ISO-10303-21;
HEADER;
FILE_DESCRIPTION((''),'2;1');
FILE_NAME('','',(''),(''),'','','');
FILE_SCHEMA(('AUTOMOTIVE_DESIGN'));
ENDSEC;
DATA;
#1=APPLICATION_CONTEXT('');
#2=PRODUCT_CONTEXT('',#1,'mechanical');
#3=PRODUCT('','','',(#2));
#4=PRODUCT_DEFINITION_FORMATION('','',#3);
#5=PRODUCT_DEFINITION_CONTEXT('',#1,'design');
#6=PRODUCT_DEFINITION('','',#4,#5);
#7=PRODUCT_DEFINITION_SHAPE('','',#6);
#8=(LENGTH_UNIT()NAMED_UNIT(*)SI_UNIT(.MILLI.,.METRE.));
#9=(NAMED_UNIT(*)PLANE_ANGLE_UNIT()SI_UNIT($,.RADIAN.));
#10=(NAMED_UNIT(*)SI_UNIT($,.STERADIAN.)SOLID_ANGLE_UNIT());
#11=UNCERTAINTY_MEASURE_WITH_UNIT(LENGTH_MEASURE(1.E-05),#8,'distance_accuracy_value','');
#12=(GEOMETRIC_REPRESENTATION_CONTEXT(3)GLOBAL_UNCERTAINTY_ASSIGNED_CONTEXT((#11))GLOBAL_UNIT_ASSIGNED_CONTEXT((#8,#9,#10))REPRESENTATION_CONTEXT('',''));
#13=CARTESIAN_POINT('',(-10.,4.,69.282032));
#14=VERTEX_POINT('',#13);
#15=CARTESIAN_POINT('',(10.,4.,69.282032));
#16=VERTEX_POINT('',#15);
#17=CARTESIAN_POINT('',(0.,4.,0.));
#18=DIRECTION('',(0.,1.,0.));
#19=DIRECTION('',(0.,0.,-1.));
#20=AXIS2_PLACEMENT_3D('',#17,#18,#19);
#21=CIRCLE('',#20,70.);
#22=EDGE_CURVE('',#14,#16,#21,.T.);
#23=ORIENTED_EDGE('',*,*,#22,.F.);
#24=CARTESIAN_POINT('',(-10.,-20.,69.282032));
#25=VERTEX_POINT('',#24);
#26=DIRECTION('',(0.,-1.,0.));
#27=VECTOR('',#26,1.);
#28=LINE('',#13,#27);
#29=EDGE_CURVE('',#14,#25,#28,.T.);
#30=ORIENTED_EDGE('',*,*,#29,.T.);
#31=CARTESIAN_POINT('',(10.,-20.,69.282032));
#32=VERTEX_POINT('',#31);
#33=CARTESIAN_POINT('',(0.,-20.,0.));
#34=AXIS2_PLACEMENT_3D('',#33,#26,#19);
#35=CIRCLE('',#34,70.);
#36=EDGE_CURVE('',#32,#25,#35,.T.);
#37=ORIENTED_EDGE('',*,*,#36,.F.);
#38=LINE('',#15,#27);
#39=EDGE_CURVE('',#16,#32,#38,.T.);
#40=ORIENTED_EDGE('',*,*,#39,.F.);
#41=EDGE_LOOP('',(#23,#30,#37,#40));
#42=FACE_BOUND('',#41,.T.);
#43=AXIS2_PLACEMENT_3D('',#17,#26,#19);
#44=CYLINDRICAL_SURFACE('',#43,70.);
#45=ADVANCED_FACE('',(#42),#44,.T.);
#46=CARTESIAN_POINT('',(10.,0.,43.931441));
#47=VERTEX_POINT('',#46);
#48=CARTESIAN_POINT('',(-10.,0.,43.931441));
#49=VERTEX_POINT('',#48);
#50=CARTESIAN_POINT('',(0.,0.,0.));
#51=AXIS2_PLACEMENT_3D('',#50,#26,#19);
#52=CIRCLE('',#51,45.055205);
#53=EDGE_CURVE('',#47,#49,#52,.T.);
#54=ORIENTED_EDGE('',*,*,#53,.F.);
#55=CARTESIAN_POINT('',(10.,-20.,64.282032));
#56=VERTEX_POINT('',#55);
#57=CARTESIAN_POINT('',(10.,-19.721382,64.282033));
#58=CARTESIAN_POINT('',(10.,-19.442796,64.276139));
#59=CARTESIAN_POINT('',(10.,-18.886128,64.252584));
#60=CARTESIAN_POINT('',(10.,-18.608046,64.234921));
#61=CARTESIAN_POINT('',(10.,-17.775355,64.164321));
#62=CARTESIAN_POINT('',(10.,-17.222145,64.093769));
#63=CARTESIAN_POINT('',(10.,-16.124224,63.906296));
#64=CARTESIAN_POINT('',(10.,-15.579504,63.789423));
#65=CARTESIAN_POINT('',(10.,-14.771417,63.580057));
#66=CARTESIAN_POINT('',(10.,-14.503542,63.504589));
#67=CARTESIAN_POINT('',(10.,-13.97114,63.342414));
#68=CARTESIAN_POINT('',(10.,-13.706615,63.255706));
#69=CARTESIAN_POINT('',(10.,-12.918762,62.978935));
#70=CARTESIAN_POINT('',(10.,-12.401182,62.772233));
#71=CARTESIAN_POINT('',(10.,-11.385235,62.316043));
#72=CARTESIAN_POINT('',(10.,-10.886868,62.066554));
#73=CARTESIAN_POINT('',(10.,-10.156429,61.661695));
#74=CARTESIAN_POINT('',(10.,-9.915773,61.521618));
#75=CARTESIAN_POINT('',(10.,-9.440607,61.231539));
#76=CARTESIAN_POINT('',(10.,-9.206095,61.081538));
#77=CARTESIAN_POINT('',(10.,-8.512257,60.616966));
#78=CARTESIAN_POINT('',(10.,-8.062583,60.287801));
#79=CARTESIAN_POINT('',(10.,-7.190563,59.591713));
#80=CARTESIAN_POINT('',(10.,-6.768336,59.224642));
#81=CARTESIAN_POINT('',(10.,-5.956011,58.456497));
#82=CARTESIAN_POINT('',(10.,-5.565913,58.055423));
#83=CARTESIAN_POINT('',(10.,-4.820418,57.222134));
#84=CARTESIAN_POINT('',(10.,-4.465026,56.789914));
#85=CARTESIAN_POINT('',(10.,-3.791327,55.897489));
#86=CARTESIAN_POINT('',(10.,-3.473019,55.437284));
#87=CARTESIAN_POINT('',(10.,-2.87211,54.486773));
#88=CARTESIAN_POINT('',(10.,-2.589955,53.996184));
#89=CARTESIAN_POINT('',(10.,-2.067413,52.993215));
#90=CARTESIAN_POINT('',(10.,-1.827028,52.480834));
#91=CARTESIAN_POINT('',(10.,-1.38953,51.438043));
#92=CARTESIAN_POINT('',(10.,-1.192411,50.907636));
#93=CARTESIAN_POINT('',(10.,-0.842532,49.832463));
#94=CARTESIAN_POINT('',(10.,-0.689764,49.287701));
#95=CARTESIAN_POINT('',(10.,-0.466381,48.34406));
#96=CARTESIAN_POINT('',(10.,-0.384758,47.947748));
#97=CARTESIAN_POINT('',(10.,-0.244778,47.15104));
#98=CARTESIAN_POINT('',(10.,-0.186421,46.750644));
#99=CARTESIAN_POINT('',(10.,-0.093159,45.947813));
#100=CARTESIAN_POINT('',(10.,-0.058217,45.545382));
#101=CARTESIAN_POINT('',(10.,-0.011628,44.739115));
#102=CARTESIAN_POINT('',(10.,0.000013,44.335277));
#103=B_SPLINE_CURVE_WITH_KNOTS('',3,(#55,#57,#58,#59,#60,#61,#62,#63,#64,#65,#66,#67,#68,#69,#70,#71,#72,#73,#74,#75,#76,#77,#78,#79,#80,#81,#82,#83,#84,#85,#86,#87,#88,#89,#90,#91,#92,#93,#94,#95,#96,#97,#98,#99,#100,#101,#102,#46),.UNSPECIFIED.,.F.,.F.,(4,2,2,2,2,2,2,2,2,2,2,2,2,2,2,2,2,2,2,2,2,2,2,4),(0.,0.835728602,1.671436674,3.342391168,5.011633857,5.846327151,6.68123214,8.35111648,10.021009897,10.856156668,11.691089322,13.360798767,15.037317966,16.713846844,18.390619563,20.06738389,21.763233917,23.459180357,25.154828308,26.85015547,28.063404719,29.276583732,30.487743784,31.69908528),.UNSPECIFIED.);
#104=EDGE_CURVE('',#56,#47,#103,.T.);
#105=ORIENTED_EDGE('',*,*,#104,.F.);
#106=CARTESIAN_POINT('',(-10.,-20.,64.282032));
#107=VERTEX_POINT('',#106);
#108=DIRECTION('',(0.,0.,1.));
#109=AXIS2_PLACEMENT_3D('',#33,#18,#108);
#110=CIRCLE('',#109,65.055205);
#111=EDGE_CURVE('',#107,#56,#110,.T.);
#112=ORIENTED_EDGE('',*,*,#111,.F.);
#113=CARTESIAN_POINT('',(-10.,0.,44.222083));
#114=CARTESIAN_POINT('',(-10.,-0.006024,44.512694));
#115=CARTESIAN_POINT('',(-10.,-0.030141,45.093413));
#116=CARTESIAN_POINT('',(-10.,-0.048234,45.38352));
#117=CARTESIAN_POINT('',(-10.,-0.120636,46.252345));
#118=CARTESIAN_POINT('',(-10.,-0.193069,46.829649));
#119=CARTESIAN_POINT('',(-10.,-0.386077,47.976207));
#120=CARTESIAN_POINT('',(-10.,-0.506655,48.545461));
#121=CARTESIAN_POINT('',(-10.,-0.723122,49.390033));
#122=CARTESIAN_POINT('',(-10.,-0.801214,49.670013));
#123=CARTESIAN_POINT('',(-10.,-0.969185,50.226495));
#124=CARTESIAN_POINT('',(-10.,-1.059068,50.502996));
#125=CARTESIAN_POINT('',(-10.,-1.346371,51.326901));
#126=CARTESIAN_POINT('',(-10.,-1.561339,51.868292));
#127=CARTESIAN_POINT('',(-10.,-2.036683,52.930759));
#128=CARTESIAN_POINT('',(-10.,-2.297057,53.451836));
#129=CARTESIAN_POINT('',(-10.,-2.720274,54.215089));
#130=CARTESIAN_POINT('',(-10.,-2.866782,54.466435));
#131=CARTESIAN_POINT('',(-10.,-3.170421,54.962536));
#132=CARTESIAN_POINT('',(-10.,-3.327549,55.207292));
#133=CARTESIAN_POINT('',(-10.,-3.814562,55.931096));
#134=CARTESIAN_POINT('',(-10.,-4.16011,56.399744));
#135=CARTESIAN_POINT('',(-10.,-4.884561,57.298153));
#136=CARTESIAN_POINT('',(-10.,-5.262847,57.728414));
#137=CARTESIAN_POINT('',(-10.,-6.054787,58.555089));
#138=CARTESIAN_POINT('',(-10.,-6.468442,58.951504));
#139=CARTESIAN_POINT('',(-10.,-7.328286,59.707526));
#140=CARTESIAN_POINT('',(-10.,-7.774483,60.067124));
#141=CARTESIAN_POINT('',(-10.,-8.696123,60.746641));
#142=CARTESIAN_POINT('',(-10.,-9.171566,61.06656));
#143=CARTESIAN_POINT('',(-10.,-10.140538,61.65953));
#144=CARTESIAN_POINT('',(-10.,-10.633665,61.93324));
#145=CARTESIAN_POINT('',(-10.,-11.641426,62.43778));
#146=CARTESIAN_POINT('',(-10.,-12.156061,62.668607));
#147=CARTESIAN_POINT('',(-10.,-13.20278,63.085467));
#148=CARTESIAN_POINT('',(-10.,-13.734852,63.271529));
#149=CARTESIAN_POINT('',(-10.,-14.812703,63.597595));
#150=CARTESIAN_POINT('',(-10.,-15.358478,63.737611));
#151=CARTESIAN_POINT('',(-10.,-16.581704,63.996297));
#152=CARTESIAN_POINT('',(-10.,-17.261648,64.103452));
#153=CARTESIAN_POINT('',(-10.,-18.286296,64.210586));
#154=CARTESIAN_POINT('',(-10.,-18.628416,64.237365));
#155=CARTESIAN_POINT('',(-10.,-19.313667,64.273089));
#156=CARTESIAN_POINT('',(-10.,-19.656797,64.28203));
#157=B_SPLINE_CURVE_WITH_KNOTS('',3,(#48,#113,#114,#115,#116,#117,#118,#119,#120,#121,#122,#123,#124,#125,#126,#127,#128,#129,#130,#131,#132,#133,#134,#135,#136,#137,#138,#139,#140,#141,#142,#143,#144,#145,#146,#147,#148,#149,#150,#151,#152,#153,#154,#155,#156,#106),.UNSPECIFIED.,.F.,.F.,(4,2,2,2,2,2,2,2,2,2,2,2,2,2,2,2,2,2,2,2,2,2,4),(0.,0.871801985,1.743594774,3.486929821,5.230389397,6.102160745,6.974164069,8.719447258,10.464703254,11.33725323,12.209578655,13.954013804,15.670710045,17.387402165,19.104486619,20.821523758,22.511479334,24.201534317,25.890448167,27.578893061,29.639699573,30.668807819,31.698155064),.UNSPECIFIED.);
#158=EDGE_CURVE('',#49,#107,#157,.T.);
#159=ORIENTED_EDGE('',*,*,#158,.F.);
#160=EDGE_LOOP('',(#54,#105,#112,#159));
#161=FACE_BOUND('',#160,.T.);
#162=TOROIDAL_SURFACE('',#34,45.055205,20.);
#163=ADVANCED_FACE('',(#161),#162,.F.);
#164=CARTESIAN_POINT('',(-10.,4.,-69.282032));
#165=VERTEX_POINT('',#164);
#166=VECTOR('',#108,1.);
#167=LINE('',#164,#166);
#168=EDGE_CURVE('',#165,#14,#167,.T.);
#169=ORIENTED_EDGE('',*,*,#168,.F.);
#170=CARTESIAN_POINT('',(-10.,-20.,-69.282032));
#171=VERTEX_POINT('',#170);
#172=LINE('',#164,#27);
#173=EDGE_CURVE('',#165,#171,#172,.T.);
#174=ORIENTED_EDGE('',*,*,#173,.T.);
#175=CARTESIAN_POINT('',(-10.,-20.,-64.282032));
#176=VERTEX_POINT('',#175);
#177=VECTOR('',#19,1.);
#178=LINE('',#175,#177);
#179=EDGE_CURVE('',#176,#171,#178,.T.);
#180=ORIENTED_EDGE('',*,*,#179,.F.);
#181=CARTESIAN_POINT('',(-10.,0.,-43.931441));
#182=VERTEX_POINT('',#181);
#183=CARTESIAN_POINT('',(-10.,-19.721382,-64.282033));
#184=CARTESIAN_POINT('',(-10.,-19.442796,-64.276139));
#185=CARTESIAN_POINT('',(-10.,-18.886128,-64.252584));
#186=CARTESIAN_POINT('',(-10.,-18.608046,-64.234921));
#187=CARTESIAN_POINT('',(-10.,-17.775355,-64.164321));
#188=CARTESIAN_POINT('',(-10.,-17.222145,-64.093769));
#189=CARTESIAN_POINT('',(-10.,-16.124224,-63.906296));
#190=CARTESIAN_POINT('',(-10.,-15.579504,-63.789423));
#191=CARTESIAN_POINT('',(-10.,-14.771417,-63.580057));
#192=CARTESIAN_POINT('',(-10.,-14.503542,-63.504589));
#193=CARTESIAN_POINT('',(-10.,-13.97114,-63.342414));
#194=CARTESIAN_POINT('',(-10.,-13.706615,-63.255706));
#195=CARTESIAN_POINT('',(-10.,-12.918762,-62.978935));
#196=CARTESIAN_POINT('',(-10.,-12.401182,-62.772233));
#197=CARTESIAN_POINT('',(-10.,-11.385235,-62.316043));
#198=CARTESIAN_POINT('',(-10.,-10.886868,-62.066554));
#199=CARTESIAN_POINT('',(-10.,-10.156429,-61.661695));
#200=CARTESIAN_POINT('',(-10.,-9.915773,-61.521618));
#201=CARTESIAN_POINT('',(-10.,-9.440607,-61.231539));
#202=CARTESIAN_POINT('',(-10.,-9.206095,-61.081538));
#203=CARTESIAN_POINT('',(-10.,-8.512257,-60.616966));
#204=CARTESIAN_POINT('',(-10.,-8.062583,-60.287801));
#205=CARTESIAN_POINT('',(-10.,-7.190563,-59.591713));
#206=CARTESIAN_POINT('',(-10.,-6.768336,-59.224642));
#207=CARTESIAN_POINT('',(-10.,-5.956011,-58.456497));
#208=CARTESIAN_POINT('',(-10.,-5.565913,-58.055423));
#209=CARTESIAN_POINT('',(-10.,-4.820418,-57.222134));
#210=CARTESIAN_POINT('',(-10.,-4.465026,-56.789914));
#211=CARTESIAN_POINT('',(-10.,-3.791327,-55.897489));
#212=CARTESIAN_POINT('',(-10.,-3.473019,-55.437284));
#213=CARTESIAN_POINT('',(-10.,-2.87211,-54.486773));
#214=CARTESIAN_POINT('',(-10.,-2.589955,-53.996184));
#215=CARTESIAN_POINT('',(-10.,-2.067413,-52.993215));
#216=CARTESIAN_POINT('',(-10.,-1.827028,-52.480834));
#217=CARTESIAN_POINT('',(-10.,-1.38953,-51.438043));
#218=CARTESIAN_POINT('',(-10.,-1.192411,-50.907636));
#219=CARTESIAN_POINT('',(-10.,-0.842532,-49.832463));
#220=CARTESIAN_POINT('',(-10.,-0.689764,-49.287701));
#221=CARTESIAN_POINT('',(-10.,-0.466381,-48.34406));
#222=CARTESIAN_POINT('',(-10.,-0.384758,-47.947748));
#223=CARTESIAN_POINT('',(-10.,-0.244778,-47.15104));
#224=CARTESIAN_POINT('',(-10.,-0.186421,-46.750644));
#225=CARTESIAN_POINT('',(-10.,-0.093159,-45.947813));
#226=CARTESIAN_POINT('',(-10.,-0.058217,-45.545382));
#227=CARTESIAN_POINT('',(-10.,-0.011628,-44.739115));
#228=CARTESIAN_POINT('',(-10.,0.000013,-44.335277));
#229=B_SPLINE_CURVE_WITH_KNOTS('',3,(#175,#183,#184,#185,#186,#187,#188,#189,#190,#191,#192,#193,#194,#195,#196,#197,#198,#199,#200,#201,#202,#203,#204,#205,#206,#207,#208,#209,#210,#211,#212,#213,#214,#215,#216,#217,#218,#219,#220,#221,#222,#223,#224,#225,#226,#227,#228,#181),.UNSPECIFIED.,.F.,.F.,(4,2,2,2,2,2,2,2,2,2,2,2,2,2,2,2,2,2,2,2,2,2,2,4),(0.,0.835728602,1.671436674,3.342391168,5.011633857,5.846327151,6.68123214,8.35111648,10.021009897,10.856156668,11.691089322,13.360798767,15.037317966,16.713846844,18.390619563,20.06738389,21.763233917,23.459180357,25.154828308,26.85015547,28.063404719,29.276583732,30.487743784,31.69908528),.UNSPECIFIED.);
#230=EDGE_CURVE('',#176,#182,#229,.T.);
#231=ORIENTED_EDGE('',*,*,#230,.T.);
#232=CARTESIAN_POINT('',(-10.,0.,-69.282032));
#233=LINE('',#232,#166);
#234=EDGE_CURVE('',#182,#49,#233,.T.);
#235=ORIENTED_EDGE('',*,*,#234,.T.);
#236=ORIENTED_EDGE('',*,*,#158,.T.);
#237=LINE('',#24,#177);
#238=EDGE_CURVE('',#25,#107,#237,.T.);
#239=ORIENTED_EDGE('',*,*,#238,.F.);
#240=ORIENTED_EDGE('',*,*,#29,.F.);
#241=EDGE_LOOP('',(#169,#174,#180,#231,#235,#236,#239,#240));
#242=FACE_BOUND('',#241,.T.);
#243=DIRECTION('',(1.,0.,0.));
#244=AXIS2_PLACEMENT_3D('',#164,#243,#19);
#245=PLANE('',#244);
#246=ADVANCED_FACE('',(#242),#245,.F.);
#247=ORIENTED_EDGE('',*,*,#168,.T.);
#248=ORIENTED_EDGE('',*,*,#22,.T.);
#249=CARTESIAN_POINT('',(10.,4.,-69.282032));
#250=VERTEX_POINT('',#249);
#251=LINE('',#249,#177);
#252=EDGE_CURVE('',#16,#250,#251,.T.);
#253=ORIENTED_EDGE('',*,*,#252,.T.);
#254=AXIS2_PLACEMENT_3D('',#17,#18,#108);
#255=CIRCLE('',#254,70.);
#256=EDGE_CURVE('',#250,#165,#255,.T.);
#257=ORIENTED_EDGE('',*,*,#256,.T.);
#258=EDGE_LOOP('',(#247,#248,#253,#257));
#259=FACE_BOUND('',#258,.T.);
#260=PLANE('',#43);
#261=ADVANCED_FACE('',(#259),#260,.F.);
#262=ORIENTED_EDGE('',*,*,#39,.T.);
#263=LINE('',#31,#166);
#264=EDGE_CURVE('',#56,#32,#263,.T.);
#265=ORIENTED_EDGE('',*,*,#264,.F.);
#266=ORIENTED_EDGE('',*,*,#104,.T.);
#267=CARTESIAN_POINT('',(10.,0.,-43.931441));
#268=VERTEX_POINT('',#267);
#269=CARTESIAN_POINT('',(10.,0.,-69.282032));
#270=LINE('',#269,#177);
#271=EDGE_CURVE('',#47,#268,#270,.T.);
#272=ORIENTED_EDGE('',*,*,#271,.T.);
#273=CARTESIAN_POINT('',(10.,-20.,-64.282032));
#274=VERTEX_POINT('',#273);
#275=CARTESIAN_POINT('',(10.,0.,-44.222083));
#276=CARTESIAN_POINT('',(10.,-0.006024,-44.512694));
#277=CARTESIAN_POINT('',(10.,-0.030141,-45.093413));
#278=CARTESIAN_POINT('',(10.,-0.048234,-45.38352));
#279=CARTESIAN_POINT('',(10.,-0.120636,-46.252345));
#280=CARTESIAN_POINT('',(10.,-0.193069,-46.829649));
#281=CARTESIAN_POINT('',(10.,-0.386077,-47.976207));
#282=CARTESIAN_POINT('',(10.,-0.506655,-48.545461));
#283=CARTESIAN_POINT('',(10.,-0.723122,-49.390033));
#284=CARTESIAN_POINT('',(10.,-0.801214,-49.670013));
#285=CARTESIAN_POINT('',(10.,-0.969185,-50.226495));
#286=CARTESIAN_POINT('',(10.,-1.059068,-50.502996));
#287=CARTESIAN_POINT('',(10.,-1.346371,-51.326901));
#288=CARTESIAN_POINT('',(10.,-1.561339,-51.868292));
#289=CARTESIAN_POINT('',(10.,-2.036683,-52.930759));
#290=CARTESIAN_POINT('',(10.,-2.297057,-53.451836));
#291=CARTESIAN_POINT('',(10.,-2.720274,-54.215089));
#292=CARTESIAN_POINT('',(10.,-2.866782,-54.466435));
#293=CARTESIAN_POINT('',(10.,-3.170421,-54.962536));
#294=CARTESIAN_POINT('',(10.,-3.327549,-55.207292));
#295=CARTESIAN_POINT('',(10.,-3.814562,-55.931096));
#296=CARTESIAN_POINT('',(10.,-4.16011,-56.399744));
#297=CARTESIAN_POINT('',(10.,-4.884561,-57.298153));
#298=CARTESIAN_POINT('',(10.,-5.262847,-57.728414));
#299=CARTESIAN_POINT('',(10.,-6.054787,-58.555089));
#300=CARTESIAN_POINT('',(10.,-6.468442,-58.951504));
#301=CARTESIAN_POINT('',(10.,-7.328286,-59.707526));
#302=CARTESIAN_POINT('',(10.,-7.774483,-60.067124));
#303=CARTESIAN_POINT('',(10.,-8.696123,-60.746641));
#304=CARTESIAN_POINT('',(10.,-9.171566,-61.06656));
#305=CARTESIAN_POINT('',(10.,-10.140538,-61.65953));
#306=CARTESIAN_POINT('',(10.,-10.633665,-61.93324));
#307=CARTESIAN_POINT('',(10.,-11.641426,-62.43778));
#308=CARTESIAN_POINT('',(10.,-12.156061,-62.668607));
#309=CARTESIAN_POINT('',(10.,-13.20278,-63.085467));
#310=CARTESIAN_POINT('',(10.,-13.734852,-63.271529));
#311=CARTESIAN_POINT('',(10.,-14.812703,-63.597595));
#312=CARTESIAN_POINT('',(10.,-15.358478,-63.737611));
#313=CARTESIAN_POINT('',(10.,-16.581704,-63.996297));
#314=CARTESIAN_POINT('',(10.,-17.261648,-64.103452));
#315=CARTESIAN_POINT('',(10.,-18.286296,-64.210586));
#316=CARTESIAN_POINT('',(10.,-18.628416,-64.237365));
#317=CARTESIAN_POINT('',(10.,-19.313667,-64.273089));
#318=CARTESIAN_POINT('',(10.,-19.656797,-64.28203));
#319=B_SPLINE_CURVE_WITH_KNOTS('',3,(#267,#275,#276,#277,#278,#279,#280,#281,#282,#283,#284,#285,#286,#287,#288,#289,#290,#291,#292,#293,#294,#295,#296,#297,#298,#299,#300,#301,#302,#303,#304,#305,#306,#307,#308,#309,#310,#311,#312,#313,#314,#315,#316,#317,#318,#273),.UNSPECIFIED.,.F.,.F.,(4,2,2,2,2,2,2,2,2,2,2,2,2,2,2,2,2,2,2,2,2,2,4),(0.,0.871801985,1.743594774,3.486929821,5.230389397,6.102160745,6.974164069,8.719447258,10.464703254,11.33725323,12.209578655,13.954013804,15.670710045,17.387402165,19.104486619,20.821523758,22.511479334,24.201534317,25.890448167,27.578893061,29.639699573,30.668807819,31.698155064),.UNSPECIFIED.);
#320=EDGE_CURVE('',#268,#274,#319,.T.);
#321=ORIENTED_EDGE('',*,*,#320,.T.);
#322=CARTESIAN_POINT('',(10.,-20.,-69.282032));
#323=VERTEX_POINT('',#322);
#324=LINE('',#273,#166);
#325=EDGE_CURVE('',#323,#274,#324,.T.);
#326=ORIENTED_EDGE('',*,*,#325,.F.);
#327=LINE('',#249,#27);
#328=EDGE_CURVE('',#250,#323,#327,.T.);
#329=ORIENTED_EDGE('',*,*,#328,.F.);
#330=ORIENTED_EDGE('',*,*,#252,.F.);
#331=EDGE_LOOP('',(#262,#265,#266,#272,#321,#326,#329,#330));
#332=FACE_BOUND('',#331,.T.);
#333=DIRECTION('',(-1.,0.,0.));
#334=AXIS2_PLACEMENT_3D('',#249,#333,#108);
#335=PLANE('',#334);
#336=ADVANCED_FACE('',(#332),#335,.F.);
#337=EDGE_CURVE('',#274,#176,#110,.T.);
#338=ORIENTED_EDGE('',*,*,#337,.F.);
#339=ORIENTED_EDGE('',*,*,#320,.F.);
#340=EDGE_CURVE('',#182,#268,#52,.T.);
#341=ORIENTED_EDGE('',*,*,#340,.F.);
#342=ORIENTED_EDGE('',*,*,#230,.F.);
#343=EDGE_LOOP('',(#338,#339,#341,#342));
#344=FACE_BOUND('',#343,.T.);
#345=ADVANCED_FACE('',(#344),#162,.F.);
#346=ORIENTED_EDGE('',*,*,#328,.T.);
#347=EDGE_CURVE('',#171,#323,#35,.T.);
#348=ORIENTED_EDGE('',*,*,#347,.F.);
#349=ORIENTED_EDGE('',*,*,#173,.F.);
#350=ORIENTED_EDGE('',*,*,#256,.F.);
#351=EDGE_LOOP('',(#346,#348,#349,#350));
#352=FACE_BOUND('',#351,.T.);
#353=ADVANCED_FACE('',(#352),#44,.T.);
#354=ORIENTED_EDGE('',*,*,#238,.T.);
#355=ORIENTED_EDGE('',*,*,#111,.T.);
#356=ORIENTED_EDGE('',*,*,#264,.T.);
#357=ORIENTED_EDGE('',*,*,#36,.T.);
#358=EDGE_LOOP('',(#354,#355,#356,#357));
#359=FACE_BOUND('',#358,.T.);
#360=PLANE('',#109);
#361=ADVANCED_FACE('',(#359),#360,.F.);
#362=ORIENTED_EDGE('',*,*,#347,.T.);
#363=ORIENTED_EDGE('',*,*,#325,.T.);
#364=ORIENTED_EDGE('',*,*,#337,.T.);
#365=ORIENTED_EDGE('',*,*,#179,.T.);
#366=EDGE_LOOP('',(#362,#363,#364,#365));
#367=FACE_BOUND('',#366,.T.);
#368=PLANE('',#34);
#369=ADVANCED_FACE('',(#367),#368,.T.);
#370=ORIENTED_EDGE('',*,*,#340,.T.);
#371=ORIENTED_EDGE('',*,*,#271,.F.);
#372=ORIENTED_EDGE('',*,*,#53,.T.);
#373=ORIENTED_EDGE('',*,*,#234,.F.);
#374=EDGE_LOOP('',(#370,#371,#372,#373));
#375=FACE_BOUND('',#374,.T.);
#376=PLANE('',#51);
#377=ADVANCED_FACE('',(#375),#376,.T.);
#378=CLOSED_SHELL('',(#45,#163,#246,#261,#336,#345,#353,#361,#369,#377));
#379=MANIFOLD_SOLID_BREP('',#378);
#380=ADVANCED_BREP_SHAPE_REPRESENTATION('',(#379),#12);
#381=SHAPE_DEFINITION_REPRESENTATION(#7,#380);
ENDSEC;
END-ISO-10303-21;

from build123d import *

# Parameters (mm, degrees)
AUFSATZ_LINEAR_AUSTRAGEN1_DEPTH = 4
AUFSATZ_LINEAR_START            = 20
AUFSATZ_LINEAR_AUSTRAGEN2_DEPTH = 20
VERRUNDUNG1_R                   = 20


with BuildPart() as part:
    # Skizze1 → Aufsatz-Linear austragen1 (new body)
    with BuildSketch(Plane(origin=(0, 0, 0), x_dir=(1, 0, 0), z_dir=(0, 1, 0))):
        with BuildLine():
            Line((-10, 69.282032303), (-10, -69.282032303))
            ThreePointArc((-10, -69.282032303), (0, -70), (10, -69.282032303))
            Line((10, -69.282032303), (10, 69.282032303))
            ThreePointArc((10, 69.282032303), (0, 70), (-10, 69.282032303))
        make_face()
    extrude(amount=AUFSATZ_LINEAR_AUSTRAGEN1_DEPTH)

    # Skizze2 → Aufsatz-Linear austragen2 (add)
    with BuildSketch(Plane.XZ.offset(AUFSATZ_LINEAR_START)):
        with BuildLine():
            Line((-10, 69.282032303), (-10, 64.282032303))
            ThreePointArc((-10, 64.282032303), (0, 65.055204842), (10, 64.282032303))
            Line((10, 64.282032303), (10, 69.282032303))
            ThreePointArc((10, 69.282032303), (0, 70), (-10, 69.282032303))
        make_face()
        with BuildLine():
            Line((-10, -64.282032303), (-10, -69.282032303))
            ThreePointArc((-10, -69.282032303), (0, -70), (10, -69.282032303))
            Line((10, -69.282032303), (10, -64.282032303))
            ThreePointArc((10, -64.282032303), (0, -65.055204842), (-10, -64.282032303))
        make_face()
    extrude(amount=-AUFSATZ_LINEAR_AUSTRAGEN2_DEPTH)

    # Verrundung1
    verrundung1_edges = [part.edges().sort_by_distance(p)[0] for p in [
        (0, 0, 65.055204842),
        (0, 0, -65.055204842),
    ]]
    fillet(verrundung1_edges, radius=VERRUNDUNG1_R - 0.0001)  # a hair under: the kernel refuses the full size


solid = part.part
